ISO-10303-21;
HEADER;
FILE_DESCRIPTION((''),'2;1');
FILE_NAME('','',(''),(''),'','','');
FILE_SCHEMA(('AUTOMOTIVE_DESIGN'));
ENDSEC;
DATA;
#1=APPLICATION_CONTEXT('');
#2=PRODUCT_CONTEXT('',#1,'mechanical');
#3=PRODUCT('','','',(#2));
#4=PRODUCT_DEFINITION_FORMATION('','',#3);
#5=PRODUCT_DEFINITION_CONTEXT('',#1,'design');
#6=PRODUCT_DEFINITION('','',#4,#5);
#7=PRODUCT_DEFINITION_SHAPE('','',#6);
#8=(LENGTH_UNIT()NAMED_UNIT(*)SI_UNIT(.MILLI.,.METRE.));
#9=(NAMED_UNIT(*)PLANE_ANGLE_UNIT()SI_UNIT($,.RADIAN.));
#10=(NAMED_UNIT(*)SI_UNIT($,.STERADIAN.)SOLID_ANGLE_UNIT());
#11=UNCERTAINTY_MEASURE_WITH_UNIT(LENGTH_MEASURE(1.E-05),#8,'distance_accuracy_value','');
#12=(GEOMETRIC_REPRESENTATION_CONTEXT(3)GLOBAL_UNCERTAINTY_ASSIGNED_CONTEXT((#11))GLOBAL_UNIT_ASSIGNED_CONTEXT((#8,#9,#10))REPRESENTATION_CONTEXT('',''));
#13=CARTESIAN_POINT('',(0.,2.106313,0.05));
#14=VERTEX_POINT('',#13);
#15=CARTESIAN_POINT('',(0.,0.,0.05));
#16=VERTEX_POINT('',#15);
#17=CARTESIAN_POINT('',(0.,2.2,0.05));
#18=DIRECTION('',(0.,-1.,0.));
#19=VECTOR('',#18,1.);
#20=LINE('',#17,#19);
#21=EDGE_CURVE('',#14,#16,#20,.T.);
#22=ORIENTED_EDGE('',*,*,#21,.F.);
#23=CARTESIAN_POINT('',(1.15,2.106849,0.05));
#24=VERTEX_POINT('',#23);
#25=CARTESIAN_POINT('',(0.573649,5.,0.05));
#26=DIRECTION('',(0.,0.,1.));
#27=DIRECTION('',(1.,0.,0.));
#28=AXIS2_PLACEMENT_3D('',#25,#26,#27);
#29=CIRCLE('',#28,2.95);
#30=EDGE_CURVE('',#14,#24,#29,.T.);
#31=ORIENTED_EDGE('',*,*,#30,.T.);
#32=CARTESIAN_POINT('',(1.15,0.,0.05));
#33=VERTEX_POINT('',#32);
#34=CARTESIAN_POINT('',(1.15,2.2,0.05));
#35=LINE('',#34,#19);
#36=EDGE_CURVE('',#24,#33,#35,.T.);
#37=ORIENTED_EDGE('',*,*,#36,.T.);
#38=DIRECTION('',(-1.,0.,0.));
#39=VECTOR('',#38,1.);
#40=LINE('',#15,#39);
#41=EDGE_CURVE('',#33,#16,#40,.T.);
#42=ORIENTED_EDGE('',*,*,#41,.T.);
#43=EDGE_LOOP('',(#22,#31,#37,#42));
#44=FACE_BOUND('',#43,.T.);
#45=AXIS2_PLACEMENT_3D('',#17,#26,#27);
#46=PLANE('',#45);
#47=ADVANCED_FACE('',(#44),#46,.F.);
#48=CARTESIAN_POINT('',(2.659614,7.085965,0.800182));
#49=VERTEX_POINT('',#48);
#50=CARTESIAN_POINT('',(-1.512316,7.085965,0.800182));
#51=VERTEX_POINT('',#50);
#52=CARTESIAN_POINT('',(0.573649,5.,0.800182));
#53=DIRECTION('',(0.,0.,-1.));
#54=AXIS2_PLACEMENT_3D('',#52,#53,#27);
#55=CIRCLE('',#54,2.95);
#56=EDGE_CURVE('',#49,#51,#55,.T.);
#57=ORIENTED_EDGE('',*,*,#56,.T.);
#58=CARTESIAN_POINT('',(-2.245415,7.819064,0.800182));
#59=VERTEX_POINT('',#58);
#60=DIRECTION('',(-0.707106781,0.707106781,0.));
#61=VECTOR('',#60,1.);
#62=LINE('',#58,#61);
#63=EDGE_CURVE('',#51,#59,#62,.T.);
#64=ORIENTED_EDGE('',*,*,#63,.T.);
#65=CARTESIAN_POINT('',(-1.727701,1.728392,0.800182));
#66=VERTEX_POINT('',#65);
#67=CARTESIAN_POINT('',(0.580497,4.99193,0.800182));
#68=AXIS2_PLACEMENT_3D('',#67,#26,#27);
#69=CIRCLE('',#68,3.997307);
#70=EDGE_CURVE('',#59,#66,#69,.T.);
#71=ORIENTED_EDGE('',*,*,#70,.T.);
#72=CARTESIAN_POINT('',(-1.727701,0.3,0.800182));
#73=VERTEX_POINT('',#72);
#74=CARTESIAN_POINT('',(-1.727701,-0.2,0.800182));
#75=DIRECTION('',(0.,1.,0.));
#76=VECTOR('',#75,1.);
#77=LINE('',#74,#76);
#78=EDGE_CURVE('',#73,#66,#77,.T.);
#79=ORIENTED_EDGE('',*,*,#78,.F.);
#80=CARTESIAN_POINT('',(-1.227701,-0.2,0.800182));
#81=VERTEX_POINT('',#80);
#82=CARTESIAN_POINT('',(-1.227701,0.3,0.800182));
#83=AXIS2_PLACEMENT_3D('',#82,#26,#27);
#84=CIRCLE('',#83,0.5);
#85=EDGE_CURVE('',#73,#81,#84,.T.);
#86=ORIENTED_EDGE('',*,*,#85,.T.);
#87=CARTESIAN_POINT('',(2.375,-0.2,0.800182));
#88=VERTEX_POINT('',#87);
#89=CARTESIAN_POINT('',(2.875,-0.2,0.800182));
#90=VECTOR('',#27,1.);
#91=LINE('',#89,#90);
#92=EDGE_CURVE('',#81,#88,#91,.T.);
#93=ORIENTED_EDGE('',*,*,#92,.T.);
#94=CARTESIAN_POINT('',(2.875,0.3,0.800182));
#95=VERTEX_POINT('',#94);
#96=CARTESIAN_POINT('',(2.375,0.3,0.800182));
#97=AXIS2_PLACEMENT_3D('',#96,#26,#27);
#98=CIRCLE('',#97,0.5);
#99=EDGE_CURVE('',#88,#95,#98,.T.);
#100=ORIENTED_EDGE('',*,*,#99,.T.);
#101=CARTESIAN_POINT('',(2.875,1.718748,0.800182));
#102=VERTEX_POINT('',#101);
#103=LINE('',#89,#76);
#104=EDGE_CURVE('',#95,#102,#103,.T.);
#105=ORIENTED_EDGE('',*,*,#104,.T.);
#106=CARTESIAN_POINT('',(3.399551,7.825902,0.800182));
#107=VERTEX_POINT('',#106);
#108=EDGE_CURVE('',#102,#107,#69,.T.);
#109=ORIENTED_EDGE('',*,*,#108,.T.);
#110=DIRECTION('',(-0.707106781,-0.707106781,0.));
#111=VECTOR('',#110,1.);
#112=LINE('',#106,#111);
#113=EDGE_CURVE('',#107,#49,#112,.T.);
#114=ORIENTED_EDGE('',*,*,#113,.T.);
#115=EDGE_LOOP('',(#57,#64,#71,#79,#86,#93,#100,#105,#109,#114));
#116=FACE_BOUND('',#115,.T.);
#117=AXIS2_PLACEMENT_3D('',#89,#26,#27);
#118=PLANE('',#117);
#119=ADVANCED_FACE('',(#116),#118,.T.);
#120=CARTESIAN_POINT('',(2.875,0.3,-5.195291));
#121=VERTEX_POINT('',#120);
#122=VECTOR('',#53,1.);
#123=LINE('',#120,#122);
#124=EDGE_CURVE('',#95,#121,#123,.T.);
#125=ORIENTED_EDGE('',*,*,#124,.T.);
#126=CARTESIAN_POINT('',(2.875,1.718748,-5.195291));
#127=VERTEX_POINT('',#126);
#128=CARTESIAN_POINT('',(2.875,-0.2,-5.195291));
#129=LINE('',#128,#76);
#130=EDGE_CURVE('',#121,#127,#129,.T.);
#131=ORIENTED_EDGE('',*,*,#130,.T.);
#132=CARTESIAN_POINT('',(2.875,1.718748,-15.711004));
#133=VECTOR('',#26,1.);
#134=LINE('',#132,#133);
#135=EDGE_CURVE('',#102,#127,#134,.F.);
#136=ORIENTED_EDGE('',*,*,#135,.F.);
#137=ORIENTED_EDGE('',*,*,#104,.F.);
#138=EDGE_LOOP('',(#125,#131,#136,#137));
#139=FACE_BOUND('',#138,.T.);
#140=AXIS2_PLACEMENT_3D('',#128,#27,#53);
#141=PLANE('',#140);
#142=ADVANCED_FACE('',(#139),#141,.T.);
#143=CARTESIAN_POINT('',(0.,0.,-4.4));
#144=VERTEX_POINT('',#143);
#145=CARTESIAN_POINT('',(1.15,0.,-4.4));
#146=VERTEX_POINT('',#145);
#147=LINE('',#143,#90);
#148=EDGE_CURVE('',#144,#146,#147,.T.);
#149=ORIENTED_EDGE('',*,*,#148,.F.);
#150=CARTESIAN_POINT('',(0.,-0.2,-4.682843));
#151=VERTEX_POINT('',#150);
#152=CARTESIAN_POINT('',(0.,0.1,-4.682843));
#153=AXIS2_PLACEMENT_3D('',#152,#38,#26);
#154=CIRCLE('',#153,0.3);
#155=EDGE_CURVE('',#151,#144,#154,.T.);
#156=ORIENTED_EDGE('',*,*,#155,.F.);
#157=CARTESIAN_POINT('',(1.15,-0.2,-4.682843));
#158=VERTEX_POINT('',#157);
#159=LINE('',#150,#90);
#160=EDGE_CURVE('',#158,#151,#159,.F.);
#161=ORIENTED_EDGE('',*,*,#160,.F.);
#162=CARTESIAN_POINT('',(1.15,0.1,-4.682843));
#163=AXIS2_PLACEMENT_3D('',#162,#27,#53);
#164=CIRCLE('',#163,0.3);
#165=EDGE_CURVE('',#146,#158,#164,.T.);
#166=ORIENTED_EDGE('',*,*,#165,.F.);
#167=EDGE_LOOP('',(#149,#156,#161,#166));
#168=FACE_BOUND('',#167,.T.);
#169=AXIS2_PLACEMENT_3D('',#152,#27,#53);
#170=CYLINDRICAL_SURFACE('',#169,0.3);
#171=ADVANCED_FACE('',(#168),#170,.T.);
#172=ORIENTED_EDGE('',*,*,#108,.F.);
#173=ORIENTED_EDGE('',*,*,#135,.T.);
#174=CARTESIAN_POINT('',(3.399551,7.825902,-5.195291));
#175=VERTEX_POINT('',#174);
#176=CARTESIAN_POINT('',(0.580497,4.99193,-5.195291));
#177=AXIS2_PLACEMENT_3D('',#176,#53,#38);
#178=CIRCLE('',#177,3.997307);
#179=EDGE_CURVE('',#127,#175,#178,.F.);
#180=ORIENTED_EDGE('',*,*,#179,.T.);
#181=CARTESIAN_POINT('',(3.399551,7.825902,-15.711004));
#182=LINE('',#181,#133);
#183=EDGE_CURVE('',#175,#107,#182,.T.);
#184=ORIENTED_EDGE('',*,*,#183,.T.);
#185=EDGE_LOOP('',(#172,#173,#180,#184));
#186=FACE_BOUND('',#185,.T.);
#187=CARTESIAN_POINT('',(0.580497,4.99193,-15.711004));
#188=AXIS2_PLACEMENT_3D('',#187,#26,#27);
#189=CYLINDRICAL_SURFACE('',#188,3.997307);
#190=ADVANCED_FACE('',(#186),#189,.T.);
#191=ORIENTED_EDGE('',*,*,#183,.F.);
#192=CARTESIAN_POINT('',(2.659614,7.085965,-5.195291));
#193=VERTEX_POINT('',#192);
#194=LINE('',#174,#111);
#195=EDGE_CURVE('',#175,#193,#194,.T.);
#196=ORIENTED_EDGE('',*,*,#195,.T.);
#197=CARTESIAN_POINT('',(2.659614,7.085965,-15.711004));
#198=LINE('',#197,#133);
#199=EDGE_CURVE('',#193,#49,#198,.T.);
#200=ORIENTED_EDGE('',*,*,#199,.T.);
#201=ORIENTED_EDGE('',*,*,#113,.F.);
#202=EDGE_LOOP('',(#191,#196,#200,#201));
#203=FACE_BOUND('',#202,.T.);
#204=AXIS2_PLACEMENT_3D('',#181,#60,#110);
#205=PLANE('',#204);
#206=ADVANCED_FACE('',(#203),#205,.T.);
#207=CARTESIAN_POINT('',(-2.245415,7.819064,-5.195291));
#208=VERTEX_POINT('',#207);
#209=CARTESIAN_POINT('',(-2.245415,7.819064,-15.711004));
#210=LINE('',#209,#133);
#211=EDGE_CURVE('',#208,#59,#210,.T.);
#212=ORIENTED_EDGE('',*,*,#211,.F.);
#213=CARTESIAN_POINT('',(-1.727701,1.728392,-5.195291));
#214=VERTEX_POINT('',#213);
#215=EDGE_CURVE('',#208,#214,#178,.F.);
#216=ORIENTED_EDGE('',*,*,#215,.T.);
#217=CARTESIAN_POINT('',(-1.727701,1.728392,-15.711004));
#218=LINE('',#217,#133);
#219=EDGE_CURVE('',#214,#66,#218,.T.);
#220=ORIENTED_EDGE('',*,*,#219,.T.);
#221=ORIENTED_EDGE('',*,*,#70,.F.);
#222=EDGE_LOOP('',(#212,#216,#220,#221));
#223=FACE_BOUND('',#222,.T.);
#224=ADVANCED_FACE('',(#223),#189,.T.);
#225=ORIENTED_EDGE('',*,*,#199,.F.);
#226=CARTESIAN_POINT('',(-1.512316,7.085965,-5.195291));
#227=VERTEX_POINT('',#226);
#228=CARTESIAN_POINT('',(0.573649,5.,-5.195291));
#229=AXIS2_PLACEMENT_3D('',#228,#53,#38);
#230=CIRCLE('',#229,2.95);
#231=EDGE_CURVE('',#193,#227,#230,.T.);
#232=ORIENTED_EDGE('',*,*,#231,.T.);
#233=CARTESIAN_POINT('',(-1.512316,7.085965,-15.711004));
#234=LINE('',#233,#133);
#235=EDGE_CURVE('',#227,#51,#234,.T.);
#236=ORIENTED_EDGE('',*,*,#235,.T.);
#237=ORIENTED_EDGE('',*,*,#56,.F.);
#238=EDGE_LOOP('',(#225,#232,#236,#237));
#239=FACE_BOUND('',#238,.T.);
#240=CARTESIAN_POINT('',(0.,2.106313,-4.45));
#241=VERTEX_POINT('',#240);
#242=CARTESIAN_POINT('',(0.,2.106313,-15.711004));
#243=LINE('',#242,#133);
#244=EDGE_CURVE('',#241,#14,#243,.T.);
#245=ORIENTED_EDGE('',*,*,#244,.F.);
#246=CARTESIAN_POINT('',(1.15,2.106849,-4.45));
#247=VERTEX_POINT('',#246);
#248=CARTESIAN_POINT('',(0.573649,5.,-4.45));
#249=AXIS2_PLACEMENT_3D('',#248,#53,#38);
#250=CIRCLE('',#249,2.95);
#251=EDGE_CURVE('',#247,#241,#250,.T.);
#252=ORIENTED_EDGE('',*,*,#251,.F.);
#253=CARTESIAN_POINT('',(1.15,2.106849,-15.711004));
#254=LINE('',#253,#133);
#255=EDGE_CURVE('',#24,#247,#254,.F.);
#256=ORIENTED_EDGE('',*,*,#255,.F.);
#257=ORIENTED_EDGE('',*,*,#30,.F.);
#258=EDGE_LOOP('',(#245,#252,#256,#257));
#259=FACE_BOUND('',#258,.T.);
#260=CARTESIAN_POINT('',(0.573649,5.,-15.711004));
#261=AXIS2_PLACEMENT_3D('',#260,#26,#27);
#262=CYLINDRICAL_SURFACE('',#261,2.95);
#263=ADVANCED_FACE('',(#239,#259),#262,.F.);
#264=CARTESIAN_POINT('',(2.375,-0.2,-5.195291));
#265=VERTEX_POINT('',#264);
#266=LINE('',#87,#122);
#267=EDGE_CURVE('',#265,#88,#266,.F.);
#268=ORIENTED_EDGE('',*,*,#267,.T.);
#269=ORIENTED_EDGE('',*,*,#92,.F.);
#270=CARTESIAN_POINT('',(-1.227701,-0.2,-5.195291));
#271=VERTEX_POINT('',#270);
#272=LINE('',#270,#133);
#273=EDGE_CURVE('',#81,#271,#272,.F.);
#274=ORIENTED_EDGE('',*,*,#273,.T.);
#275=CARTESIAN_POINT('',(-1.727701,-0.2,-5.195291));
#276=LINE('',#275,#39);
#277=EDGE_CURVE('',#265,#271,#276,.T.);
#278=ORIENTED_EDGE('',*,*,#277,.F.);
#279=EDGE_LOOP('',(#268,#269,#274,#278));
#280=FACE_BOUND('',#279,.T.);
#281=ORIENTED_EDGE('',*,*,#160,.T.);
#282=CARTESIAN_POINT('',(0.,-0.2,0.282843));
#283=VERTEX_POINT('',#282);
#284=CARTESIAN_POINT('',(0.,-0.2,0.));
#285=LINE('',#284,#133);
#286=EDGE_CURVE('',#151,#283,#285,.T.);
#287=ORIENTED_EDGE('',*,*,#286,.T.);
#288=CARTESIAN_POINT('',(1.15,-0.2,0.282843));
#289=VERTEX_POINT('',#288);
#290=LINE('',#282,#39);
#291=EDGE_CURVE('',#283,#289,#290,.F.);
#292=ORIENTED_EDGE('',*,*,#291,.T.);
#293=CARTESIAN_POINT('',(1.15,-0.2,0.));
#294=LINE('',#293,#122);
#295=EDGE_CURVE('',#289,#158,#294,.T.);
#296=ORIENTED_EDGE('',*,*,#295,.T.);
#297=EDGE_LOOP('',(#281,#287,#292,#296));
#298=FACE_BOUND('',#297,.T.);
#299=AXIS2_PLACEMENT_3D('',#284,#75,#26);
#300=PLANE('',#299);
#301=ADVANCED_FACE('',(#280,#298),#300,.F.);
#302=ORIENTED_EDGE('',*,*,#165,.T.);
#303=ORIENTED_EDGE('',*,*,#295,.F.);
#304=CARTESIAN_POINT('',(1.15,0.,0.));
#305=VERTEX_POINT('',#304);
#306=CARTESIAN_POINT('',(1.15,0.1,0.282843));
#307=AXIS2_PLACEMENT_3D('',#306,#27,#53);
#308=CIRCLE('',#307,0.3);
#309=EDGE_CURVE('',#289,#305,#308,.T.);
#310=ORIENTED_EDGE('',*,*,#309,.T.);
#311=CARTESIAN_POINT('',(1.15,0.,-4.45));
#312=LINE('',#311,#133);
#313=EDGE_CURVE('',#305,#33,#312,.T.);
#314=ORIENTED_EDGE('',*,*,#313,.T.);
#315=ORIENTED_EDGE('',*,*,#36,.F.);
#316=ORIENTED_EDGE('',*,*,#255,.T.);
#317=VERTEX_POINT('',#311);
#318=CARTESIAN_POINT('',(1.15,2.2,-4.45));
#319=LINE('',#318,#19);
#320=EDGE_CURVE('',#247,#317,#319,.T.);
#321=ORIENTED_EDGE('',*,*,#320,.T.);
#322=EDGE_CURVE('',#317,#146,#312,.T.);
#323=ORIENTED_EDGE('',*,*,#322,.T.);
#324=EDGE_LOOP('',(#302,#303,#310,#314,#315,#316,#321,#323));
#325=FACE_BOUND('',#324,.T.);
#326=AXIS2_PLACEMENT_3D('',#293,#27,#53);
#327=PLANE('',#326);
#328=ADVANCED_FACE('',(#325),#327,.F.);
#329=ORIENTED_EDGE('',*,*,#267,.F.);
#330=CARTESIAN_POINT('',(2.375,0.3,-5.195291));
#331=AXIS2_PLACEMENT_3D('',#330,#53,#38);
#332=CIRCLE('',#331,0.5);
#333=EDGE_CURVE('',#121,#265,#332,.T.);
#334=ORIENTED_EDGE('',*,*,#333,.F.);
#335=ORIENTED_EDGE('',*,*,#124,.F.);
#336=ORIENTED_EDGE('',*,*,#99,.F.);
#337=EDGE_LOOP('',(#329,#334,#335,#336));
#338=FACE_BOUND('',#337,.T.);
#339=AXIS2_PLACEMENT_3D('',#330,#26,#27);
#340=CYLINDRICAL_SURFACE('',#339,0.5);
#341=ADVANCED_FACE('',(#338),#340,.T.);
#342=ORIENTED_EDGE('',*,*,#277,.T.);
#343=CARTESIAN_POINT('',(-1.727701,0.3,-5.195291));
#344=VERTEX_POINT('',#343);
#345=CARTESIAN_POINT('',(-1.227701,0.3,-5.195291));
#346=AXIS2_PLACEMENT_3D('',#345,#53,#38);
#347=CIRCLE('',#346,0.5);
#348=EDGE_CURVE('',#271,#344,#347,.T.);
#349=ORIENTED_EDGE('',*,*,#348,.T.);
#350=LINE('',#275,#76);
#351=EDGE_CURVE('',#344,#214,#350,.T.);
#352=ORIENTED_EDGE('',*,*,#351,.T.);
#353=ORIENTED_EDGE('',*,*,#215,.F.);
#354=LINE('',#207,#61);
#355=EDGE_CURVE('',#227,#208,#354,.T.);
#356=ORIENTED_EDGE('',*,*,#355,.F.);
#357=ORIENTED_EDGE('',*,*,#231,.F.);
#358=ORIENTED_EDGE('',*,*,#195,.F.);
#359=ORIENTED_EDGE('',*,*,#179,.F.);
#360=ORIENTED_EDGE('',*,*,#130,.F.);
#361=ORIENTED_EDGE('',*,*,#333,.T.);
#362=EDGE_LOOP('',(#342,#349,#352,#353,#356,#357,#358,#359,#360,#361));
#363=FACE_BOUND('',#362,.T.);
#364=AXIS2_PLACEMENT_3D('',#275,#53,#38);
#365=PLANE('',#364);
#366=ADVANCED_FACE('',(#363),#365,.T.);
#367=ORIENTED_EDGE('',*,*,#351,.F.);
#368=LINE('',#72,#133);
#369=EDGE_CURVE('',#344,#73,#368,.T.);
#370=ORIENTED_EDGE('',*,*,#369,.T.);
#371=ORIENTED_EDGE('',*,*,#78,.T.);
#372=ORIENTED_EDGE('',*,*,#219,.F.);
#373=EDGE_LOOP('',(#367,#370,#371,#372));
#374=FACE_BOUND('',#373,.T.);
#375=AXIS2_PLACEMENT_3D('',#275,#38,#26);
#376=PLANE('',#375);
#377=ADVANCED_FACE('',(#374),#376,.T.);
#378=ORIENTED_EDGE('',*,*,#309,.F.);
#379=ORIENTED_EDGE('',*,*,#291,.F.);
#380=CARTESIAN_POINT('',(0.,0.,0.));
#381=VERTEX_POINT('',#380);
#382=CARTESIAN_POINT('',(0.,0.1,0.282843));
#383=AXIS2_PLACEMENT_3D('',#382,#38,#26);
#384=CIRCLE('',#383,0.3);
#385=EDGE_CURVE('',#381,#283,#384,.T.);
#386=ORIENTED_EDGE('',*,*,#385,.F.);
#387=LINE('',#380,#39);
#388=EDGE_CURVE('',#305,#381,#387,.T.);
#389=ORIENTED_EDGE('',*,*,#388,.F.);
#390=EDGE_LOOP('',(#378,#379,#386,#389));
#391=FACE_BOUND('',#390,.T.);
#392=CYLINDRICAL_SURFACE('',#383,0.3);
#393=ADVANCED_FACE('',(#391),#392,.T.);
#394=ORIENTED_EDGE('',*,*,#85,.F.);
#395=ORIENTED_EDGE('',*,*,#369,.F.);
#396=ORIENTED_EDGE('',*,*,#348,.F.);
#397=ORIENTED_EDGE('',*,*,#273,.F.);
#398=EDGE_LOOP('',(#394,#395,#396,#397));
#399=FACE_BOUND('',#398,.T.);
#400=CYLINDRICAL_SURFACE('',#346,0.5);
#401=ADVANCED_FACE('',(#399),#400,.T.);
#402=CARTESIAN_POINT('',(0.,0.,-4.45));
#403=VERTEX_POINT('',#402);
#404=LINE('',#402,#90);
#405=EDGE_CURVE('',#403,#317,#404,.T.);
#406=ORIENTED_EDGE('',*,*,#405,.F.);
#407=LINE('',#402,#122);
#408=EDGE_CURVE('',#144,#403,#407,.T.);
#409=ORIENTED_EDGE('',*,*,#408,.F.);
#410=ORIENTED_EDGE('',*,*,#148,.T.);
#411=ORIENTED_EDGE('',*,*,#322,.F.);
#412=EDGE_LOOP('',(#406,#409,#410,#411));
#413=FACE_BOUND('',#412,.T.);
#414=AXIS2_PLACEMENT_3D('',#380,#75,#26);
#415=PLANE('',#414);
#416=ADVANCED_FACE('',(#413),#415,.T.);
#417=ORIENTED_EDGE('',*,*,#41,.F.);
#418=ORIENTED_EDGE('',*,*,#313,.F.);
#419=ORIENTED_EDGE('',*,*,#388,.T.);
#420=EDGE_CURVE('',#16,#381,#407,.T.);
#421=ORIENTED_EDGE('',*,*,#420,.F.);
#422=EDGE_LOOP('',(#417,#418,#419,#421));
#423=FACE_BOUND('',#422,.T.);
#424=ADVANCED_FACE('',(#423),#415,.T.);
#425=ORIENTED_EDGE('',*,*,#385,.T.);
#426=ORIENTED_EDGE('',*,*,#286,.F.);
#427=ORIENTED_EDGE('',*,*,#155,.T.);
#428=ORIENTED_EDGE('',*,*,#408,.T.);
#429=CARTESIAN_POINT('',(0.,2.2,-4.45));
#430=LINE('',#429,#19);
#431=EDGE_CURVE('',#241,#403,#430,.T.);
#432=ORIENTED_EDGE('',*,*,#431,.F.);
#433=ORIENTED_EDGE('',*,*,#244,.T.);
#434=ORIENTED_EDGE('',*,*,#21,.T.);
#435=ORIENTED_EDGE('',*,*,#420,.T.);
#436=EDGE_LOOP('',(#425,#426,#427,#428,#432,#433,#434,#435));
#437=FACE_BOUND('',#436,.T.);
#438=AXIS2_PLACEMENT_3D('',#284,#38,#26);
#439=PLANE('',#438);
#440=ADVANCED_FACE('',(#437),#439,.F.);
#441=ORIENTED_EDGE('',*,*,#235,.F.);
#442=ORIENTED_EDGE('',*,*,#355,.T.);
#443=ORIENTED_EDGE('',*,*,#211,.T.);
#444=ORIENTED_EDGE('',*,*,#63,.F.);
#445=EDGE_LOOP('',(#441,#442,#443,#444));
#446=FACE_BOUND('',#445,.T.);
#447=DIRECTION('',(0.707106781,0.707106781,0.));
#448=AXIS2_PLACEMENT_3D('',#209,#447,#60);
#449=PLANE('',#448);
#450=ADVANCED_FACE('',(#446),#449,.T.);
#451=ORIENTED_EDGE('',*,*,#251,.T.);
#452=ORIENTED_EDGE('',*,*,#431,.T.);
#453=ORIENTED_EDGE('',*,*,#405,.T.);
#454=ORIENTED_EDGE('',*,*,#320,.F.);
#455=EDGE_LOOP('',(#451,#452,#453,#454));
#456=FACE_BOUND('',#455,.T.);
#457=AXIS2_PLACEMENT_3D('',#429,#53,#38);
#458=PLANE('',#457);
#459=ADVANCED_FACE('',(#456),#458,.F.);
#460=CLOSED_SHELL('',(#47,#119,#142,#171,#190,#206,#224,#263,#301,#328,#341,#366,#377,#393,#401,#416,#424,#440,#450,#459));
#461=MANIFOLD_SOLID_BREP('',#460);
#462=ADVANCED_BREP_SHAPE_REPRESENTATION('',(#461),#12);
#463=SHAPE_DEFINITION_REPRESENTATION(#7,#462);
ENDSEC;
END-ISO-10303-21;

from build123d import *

# Parameters (mm, degrees)
BOSS_EXTRUDE1_DEPTH      = 2
BOSS_EXTRUDE1_DEPTH_BACK = 0.2
SKETCH1_W                = 4.602701487
SKETCH1_H                = 5.995472756
SKETCH1_W_2              = 1.15
SKETCH1_H_2              = 4.4
BOSS_EXTRUDE2_REACH      = 8.943
SKETCH4_W                = 1.15
SKETCH4_H                = 4.5
CUT_EXTRUDE2_DEPTH       = 2.2
FILLET1_R                = 0.5
FILLET2_R                = 0.3


with BuildPart() as part:
    # Sketch1 → Boss-Extrude1 (new, two sides: drawn at the far end of the back side and taken through both)
    with BuildSketch(Plane(origin=(0, 0, 0), x_dir=(1, 0, 0), z_dir=(0, 1, 0)).offset(-BOSS_EXTRUDE1_DEPTH_BACK)):
        with Locations((0.573649256, 2.197554863)):
            Rectangle(SKETCH1_W, SKETCH1_H)
        with Locations((0.575, 2.2)):
            Rectangle(SKETCH1_W_2, SKETCH1_H_2, mode=Mode.SUBTRACT)
    extrude(amount=BOSS_EXTRUDE1_DEPTH + BOSS_EXTRUDE1_DEPTH_BACK)

    # Boss-Extrude2: up to this face of the body (flat: up to its plane)
    boss_extrude2_end = Plane(part.part.faces().sort_by_distance((0.573649257, 0.9, -5.195291241))[0])
    # Sketch3 → Boss-Extrude2 (add, up to the picked face)
    with BuildSketch(Plane.XY.offset(0.800181515), mode=Mode.PRIVATE) as boss_extrude2_sk1:
        with BuildLine():
            Line((-2.24541451, 7.819063766), (-1.512315748, 7.085965005))
            ThreePointArc((-1.512315748, 7.085965005), (0.573649257, 2.05), (2.659614261, 7.085965005))
            Line((2.659614261, 7.085965005), (3.399551047, 7.82590179))
            ThreePointArc((3.399551047, 7.82590179), (0.585339186, 0.994625964), (-2.24541451, 7.819063766))
        make_face()
    boss_extrude2_tool1 = split(extrude(boss_extrude2_sk1.sketch, amount=-BOSS_EXTRUDE2_REACH, mode=Mode.PRIVATE), bisect_by=boss_extrude2_end, keep=Keep.BOTH, mode=Mode.PRIVATE)
    add(boss_extrude2_tool1.solids().sort_by(Axis((-1.953222, 7.378157, 0.800182), (0, 0, -1)))[0])

    # Sketch4 → Cut-Extrude2 (cut)
    with BuildSketch(Plane.XZ):
        with Locations((0.575, -2.2)):
            Rectangle(SKETCH4_W, SKETCH4_H)
    extrude(amount=-CUT_EXTRUDE2_DEPTH, mode=Mode.SUBTRACT)

    # Fillet1
    fillet1_edges = [part.edges().sort_by_distance(p)[0] for p in [
        (-1.727701487, -0.2, -2.197554863),
        (2.875, -0.2, -2.197554863),
    ]]
    fillet(fillet1_edges, radius=FILLET1_R)

    # Fillet2
    # the kernel refuses this fillet: 0.3 mm, written as the material it takes off along each edge
    with BuildSketch(Plane(origin=(1.15, -0.2, -4.4), x_dir=(0, 0, -1), z_dir=(-1, 0, 0)), Plane(origin=(0, -0.2, 0), x_dir=(0, 0, 1), z_dir=(1, 0, 0))) as fillet2_piece_1:
        with BuildLine():
            CenterArc((0.282842712, -0.3), FILLET2_R, 90, 70.528779366)
            Line((0, -0.2), (-0.005656854, -0.198))
            ThreePointArc((-0.005656854, -0.198), (-0.006, -0.1), (-0.006, 0))
            Line((-0.006, 0), (0, 0.006))
            Line((0, 0.006), (0.282842712, 0.006))
            Line((0.282842712, 0.006), (0.282842712, 0))
        make_face()
    extrude(amount=1.15, mode=Mode.SUBTRACT)


solid = part.part
